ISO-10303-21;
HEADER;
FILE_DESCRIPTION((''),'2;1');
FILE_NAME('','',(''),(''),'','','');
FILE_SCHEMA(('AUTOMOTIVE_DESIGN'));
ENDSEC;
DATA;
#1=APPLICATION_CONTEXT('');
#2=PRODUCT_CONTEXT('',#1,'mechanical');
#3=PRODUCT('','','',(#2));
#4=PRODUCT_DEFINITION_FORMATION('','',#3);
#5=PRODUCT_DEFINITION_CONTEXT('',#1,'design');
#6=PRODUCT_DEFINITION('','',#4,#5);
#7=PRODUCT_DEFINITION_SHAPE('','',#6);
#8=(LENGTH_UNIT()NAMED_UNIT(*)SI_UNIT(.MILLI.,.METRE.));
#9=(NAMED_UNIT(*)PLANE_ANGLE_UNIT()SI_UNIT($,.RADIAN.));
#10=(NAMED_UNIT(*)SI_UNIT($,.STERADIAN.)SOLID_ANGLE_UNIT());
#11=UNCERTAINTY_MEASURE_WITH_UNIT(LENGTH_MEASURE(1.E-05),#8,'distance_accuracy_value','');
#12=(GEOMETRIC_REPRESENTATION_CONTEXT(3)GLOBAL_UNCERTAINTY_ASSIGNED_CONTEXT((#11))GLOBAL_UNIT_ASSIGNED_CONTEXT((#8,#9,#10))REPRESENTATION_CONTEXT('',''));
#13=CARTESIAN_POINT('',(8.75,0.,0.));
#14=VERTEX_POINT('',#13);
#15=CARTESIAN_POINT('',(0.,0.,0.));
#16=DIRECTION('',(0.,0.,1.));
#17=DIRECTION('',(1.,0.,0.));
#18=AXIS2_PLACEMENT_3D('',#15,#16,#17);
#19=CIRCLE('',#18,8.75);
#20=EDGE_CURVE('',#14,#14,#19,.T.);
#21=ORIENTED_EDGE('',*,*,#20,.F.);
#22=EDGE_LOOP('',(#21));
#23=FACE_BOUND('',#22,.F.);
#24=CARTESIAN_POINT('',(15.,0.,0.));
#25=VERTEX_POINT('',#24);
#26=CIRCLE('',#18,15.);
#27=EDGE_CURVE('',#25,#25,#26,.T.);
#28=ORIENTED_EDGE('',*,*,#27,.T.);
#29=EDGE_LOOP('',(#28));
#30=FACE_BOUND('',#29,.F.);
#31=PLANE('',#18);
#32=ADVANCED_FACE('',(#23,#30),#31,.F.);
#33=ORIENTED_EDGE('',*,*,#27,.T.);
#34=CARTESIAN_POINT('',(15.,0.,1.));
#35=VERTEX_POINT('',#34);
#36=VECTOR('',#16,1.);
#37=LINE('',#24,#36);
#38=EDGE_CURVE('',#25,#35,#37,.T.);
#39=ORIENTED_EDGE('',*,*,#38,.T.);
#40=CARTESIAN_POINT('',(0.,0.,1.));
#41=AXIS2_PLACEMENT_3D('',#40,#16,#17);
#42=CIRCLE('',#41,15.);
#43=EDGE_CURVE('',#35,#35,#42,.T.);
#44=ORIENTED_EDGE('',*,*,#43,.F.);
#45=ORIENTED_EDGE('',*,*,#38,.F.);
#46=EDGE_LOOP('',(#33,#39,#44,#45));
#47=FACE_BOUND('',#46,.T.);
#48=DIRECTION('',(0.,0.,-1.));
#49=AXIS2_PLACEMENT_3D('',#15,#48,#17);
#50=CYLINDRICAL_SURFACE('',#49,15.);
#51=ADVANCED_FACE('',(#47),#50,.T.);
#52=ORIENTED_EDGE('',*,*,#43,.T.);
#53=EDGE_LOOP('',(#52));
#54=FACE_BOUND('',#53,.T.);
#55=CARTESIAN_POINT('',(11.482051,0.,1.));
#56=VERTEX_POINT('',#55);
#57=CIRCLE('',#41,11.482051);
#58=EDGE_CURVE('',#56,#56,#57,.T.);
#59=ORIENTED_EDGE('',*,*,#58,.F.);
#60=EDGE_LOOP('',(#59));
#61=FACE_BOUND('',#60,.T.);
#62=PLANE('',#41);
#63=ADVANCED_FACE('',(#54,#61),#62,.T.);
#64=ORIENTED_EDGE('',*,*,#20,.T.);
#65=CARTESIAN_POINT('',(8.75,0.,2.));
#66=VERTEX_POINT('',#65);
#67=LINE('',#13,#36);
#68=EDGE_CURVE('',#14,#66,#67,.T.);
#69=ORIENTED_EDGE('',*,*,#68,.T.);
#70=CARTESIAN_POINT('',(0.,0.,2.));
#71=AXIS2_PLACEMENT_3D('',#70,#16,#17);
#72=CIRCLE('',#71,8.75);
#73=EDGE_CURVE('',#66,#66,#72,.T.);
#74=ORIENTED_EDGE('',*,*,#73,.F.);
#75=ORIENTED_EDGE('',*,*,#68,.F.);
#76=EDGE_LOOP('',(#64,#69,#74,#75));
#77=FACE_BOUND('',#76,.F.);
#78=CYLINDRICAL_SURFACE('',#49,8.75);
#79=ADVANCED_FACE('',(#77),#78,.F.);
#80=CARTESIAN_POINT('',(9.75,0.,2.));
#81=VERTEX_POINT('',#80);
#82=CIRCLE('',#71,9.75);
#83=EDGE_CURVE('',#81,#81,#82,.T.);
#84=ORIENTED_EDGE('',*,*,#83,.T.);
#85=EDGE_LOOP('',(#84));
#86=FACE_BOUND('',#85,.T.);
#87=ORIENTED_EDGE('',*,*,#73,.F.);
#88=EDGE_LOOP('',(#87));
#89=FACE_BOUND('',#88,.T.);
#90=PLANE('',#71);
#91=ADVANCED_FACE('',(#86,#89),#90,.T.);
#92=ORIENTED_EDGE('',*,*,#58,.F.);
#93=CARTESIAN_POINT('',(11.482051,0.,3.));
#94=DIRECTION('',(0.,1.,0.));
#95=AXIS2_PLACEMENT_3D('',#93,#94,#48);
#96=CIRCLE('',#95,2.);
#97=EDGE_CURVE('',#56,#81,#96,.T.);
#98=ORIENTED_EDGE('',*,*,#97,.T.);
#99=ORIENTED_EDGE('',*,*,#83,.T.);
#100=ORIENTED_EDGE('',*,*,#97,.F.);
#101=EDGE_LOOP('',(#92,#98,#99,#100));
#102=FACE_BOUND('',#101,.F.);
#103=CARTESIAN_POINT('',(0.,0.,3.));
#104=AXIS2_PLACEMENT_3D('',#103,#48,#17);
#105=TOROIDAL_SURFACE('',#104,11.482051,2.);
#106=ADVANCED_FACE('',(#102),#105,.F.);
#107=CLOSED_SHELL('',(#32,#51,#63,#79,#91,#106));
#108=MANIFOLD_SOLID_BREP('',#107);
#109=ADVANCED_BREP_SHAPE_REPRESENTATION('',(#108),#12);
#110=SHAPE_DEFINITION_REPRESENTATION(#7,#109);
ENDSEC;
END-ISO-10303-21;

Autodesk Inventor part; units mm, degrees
ref_plane "YZ Plane" through (0, 0, 0) normal (1, 0, 0) x (0, 1, 0)
ref_plane "XZ Plane" through (0, 0, 0) normal (0, 1, 0) x (-1, 0, 0)
ref_plane "XY Plane" through (0, 0, 0) normal (0, 0, 1) x (1, 0, 0)
sketch "Sketch1" plane through (0, 0, 0) normal (0, 0, 1) x (1, 0, 0)
  circle A0 centre (0, 0) radius 8.75
  circle A1 centre (0, 0) radius 15
  circle A2 centre (0, 0) radius 9.75
  dimension "d0" = 17.5
  dimension "d1" = 30
  dimension "d2" = 1
extrude "Extrusion1" add sketch "Sketch1" along normal blind 1 contours A1
extrude "Extrusion2" add sketch "Sketch1" along normal blind 2 contours A2
fillet "Fillet1" radius 2 1 edges at (-9.75, 0, 1)
properties part number "Retenedor"
